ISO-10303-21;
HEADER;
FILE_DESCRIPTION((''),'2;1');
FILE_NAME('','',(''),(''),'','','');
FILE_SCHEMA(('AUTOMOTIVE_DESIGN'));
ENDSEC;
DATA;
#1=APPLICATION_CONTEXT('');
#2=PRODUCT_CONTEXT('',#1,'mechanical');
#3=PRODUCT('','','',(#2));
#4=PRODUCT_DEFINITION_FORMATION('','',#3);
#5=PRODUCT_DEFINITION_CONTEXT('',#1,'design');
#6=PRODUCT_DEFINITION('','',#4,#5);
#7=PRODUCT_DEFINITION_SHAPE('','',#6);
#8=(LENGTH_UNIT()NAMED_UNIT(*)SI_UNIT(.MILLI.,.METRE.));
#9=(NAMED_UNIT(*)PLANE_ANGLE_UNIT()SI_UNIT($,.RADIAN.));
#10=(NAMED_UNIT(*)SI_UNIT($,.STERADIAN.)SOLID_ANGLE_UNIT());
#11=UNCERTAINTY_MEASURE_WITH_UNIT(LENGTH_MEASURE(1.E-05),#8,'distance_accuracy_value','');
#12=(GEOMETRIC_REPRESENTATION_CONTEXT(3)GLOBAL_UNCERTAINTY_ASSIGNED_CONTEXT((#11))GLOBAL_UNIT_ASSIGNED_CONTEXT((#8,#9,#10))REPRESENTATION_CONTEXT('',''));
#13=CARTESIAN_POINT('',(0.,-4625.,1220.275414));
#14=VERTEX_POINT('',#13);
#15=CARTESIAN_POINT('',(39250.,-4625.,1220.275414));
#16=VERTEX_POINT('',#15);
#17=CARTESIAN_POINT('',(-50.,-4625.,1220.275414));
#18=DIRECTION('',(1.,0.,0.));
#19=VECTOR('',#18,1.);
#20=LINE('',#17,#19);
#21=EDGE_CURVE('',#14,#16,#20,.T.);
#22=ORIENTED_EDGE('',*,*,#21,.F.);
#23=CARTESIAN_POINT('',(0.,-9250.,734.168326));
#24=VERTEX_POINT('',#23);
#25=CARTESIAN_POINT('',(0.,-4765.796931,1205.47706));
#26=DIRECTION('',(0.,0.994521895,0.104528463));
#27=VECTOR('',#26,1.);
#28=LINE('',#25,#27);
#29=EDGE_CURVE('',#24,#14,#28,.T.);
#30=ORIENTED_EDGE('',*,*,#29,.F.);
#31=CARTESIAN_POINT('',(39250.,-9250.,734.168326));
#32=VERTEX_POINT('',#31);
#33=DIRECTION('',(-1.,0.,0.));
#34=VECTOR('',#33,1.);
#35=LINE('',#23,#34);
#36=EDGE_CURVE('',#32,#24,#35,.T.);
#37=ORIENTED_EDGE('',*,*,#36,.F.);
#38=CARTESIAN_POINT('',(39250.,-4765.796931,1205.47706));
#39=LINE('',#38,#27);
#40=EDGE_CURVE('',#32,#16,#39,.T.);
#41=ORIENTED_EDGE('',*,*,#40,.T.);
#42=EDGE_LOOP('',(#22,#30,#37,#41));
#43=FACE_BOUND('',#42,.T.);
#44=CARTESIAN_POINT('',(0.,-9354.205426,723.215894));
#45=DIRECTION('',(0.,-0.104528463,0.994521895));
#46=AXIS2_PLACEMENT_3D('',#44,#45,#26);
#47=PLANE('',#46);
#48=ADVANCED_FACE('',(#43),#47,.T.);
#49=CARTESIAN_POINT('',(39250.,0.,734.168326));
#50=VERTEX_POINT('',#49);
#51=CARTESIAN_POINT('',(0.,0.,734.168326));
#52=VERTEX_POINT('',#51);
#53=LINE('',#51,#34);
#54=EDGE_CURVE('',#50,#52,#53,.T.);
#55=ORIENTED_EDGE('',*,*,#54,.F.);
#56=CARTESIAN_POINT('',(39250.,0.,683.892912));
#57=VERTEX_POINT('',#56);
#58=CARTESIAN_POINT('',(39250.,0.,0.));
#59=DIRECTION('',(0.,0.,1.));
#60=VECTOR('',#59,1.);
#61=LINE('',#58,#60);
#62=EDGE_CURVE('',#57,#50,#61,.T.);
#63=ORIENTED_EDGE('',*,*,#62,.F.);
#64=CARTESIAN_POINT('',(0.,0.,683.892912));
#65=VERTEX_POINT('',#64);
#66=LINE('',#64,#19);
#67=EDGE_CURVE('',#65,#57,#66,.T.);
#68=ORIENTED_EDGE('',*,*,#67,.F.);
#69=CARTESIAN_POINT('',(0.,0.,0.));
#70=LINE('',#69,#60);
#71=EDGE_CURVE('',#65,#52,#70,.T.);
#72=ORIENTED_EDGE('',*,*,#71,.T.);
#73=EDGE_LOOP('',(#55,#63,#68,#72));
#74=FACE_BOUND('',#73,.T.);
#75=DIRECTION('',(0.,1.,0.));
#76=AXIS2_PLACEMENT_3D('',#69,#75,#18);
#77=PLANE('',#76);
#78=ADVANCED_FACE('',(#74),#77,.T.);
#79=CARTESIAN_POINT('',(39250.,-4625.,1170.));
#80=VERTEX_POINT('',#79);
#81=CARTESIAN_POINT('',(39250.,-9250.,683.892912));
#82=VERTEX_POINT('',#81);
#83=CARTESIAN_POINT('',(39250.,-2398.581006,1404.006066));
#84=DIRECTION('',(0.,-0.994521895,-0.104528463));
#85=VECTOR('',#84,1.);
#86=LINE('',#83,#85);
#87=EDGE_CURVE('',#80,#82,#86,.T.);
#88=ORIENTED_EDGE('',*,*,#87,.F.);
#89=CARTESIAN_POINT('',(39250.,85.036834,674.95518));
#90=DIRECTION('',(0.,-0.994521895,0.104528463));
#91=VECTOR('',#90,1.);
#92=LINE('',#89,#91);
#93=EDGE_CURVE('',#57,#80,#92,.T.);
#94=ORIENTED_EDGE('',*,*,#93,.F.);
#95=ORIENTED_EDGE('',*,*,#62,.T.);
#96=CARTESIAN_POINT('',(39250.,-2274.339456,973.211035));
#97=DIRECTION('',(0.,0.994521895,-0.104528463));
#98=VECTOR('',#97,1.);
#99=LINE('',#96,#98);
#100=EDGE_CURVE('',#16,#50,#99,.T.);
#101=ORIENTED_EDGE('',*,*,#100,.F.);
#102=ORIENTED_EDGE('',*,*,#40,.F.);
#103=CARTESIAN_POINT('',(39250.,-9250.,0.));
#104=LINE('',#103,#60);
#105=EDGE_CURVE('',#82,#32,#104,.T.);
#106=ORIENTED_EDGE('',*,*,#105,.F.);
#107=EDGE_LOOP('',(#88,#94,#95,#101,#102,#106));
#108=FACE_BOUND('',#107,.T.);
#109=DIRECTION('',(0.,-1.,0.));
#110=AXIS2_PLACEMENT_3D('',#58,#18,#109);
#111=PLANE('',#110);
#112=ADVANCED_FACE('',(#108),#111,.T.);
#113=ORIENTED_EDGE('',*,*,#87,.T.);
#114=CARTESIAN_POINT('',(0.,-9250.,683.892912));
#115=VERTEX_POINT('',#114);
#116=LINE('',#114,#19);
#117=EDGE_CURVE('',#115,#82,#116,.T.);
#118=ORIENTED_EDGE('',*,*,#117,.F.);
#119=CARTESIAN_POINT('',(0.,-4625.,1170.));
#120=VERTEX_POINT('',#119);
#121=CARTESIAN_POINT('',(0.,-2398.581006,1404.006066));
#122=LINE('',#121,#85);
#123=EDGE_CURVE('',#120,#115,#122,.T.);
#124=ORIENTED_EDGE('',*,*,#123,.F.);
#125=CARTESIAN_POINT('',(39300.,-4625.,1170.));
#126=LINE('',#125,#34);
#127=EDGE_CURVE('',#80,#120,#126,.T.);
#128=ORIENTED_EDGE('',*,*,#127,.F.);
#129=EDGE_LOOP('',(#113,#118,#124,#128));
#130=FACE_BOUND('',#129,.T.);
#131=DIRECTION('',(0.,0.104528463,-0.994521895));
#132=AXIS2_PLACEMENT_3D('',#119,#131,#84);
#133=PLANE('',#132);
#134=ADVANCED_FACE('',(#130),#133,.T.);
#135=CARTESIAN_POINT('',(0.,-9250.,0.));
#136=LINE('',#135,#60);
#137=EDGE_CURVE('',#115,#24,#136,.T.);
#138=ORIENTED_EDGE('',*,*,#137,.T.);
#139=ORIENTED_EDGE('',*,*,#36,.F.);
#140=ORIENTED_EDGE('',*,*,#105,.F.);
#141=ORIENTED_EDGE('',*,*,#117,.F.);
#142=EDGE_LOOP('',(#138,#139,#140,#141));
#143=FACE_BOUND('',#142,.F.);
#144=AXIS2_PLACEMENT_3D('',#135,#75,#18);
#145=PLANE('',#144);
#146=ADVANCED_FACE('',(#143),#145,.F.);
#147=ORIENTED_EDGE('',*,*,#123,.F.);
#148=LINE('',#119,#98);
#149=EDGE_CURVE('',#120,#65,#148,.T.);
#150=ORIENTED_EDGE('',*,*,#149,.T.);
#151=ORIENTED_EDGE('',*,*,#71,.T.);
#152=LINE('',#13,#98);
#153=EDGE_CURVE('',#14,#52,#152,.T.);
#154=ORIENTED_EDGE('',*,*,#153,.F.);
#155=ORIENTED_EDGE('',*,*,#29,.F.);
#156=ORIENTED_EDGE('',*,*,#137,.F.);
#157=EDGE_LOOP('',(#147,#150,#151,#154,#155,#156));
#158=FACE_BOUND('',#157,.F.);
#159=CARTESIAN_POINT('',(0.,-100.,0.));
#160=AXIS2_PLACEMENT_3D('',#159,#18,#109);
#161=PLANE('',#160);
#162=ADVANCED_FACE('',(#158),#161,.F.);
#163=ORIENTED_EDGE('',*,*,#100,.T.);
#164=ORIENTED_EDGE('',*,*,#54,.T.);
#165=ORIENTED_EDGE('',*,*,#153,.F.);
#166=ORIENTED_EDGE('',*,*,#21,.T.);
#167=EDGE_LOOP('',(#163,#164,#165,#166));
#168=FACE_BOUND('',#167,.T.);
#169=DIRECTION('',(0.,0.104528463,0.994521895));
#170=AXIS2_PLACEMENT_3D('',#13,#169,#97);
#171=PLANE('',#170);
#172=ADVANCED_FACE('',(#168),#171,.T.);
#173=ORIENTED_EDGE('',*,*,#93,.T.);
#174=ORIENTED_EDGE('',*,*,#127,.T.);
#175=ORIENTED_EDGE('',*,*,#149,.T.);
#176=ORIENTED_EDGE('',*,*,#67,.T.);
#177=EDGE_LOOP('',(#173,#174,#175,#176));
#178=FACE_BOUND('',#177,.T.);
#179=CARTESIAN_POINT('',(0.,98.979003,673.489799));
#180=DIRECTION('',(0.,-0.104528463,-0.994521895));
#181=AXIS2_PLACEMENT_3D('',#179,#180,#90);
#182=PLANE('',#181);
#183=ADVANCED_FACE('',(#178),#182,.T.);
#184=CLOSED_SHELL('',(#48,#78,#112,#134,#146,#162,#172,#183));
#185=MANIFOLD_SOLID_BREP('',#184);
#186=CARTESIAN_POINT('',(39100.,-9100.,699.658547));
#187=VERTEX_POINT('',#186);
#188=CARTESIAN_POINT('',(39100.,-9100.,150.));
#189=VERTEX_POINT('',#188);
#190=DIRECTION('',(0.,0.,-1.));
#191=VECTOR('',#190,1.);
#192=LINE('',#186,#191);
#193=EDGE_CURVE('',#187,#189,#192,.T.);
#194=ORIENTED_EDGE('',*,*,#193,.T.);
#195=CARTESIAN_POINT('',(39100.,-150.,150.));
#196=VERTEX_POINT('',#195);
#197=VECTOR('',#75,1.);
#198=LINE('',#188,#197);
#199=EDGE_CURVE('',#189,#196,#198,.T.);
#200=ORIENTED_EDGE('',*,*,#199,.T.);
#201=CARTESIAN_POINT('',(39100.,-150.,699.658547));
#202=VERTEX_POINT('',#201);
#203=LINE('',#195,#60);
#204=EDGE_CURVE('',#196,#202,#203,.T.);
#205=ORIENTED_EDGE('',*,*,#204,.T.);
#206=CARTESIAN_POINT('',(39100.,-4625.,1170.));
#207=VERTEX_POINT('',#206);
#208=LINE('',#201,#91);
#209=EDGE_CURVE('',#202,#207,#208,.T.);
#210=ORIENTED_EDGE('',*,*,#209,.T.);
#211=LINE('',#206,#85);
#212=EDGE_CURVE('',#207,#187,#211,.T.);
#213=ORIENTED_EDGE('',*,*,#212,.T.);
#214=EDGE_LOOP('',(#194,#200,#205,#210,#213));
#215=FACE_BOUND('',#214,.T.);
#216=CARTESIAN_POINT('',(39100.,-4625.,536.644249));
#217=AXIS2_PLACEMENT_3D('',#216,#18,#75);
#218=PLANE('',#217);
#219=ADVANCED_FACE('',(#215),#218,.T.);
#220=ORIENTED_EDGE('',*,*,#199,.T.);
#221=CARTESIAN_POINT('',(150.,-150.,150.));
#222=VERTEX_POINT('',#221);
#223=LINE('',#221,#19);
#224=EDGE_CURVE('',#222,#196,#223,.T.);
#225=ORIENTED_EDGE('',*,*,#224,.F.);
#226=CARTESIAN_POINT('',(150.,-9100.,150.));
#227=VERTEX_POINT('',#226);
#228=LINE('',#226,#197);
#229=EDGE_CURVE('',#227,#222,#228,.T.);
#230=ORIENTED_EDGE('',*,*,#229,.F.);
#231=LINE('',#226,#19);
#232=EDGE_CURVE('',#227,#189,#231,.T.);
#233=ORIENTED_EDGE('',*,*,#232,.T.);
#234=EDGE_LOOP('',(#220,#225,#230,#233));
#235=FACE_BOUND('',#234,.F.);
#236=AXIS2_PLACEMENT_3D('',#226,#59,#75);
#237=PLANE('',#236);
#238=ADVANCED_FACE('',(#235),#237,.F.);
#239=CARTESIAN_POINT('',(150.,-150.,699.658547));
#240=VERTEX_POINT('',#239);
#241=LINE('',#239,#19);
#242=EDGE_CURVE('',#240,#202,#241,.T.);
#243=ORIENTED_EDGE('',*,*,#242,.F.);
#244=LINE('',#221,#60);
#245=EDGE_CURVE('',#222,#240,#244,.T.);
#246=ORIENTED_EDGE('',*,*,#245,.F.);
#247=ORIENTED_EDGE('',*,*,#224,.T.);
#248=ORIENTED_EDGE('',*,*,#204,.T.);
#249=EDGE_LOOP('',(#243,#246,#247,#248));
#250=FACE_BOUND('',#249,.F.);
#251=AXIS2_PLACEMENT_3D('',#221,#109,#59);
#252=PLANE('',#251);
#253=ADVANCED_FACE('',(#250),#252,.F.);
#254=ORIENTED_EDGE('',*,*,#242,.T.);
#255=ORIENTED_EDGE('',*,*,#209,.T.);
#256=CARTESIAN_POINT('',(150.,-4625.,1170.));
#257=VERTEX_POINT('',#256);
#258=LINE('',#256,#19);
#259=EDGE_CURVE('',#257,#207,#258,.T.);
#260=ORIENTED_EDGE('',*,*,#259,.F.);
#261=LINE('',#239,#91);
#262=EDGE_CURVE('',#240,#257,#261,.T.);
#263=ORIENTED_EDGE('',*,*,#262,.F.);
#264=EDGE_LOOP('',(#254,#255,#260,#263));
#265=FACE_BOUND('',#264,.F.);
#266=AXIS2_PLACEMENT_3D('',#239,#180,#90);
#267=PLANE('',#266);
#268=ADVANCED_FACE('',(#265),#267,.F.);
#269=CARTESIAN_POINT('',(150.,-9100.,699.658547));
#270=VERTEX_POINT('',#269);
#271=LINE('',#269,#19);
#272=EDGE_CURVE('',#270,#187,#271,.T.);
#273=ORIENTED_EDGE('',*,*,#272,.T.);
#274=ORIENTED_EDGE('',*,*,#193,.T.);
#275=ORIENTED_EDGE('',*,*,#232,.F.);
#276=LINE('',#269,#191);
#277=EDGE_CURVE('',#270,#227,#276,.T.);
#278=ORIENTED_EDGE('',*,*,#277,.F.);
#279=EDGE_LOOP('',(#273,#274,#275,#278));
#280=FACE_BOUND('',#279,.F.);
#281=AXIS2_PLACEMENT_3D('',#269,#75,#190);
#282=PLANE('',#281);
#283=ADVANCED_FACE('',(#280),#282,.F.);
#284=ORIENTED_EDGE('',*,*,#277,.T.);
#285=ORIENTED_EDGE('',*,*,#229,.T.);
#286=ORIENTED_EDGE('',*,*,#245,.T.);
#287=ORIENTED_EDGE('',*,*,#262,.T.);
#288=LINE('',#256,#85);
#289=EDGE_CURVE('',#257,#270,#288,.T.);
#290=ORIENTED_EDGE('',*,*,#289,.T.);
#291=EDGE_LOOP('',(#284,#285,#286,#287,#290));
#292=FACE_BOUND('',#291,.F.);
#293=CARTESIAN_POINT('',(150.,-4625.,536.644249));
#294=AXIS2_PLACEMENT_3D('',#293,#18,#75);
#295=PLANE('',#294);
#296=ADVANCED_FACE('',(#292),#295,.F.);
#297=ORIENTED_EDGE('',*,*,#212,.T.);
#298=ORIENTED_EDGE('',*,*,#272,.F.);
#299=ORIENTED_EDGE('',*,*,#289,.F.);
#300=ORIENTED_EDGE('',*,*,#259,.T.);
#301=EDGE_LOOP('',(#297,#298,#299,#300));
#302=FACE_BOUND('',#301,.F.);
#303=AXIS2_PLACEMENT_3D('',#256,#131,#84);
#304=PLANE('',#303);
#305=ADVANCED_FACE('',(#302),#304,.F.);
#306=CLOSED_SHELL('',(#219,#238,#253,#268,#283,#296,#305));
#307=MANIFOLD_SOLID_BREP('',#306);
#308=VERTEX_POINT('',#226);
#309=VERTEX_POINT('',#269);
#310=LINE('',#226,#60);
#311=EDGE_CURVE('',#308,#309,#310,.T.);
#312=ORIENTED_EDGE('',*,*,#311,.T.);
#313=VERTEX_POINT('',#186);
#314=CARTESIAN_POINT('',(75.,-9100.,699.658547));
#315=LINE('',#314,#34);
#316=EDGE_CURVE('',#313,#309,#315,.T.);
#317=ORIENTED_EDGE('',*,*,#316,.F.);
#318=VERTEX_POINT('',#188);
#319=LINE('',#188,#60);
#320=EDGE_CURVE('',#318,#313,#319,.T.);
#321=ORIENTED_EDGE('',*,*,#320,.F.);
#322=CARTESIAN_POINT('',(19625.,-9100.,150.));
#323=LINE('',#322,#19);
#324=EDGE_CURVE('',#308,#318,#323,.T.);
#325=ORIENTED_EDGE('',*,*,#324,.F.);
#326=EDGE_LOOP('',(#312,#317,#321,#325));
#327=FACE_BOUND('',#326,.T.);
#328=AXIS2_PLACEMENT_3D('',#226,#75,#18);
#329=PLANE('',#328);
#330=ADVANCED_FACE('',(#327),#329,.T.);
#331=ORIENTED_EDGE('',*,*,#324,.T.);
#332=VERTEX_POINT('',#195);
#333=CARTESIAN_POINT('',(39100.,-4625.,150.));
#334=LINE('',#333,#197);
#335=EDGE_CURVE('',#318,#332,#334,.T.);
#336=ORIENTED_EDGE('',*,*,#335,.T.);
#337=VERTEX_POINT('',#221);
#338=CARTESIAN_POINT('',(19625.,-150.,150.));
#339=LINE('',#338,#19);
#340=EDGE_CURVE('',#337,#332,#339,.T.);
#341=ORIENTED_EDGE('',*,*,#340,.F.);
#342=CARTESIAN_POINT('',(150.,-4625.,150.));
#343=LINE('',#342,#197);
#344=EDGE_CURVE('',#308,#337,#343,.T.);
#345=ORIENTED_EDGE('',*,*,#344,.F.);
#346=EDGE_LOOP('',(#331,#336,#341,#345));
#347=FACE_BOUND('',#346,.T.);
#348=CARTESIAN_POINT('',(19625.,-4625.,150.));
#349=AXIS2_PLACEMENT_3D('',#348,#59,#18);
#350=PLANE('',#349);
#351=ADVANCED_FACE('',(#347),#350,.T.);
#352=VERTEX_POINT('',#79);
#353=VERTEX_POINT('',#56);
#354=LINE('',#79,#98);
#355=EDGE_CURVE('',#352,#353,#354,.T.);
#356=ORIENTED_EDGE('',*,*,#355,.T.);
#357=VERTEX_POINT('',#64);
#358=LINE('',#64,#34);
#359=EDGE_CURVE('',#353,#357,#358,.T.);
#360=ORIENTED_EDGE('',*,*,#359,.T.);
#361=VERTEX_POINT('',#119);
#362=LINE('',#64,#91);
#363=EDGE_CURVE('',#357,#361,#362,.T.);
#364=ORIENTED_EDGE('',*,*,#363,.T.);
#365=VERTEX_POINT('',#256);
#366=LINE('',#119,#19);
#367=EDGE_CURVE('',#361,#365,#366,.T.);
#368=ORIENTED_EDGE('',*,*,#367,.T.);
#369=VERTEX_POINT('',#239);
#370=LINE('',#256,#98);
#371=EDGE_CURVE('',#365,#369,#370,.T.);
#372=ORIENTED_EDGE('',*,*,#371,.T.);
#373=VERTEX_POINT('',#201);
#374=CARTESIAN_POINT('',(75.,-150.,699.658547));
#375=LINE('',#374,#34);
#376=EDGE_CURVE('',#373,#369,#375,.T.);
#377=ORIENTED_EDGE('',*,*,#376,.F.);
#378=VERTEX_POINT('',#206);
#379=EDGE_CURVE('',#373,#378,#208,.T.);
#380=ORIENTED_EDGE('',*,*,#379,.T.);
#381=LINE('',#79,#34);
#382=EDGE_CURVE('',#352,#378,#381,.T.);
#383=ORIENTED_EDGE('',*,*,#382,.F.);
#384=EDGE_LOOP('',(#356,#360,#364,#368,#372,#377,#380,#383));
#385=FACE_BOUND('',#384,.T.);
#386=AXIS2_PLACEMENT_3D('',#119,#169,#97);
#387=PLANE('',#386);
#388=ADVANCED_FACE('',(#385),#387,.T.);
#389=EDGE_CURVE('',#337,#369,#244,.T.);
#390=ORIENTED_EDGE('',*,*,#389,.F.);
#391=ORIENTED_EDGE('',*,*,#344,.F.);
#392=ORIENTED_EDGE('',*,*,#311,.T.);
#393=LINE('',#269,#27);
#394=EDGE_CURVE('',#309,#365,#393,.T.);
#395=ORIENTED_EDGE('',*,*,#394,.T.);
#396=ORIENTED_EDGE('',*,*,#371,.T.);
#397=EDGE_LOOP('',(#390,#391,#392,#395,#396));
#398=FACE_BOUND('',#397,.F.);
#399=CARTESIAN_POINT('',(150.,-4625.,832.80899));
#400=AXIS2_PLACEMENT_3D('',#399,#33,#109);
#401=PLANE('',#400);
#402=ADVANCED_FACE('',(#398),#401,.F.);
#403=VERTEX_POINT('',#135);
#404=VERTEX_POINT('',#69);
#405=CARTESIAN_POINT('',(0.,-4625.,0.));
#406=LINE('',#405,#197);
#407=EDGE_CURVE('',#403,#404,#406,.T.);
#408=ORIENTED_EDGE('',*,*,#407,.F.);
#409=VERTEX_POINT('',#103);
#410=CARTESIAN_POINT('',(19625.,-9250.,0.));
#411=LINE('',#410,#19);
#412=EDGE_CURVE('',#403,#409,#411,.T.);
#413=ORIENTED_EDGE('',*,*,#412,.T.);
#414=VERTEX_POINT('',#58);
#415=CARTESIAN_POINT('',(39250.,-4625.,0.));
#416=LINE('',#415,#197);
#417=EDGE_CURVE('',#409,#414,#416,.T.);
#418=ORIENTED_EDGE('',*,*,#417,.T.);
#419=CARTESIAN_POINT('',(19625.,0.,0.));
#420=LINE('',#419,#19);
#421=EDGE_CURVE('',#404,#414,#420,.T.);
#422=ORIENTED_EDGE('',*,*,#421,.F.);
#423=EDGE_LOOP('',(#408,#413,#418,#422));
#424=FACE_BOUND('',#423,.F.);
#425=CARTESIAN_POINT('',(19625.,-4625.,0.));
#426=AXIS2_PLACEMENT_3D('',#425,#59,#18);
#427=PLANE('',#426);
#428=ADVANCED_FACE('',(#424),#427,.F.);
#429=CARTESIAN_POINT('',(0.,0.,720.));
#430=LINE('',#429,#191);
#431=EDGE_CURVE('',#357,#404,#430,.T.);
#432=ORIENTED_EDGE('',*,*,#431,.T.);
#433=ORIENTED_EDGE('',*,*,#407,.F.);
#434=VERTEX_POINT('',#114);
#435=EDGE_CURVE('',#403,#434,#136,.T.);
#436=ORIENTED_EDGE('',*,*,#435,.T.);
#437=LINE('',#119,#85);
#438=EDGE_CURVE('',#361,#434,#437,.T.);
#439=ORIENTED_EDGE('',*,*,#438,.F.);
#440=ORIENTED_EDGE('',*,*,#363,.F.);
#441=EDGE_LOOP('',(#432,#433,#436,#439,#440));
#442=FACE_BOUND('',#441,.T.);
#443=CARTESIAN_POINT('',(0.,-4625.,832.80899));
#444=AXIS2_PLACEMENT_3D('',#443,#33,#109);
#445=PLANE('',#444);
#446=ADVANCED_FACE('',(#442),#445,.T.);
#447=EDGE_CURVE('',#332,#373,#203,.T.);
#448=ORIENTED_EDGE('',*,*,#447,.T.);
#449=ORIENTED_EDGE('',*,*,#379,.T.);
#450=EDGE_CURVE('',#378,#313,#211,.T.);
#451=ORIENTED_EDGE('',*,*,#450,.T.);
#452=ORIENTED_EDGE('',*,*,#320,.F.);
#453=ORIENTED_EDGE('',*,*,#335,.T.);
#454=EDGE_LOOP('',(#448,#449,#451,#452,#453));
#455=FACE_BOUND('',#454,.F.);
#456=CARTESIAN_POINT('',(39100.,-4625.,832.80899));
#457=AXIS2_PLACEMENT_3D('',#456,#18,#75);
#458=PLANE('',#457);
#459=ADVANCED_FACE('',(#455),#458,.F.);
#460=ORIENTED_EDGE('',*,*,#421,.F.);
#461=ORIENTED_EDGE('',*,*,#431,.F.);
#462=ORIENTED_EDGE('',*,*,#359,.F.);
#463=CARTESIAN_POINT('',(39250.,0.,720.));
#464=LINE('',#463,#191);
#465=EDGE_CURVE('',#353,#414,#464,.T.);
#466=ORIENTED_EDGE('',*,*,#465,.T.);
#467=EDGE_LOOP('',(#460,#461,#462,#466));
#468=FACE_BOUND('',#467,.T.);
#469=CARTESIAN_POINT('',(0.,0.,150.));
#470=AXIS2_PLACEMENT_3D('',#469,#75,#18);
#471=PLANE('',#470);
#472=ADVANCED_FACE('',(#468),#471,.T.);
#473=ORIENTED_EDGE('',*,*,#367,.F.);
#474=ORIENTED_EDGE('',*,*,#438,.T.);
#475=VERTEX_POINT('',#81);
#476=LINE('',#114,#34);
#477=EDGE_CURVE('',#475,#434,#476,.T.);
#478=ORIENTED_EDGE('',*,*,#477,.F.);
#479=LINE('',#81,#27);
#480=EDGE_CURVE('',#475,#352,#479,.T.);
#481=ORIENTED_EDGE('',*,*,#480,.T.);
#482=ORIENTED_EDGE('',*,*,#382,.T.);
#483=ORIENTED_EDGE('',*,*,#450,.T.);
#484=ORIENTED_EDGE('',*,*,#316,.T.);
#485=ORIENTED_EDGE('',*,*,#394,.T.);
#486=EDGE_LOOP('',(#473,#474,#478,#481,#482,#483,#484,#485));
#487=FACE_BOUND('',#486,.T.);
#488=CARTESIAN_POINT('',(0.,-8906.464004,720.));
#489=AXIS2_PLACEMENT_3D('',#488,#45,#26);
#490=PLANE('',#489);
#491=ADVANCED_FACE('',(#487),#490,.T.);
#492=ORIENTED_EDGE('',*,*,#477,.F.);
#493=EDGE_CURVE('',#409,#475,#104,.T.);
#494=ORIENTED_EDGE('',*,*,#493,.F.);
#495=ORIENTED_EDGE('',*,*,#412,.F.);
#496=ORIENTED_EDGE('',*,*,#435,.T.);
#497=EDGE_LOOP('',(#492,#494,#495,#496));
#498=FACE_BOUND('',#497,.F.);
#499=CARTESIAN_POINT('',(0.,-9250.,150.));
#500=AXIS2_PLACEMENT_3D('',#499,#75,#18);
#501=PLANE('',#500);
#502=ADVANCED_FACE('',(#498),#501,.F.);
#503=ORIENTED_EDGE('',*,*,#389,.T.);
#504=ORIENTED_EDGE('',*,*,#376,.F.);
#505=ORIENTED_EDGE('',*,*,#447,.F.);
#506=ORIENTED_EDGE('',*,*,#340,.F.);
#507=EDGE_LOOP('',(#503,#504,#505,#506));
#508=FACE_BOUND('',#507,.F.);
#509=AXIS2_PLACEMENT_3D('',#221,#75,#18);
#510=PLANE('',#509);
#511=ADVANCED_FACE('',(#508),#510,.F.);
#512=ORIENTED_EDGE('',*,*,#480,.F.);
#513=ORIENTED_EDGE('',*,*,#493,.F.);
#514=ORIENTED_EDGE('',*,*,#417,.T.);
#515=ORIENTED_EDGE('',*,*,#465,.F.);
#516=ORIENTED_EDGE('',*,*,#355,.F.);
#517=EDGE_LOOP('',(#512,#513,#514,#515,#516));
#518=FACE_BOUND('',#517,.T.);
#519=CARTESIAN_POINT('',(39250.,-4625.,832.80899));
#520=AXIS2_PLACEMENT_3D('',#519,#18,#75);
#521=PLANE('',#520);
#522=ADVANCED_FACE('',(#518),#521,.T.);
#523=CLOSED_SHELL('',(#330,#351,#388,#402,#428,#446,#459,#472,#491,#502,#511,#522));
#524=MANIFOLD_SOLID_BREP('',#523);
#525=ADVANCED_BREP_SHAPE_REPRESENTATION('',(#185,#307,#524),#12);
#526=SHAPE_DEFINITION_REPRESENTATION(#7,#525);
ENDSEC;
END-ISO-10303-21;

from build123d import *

# Parameters (mm, degrees)
F0_W          = 39250
F0_H          = 9250
F1_DEPTH      = 150
F2_W          = 39250
F2_H          = 9250
F2_W_2        = 38950
F2_H_2        = 8950
F3_DEPTH      = 570
F5_DEPTH      = 39250.001
F7_DEPTH      = 50
F7_DEPTH_BACK = 39300
F9_DEPTH      = 150
F11_DEPTH     = 150
F12_W         = 266.9223773158
F12_H         = 1000
F13_DEPTH     = 1220.2764139782
F14_W         = 44695.1484680176
F14_H         = 14306.3936233521
F14_W_2       = 39250
F14_H_2       = 9250
F15_DEPTH     = 1220.2764139782
F17_DEPTH     = 38950


with BuildPart() as f1:
    # F0 (on Top) → F1 (new body)
    with BuildSketch(Plane.XY):
        with Locations((19625, -4625)):
            Rectangle(F0_W, F0_H)
    extrude(amount=F1_DEPTH)

    # F2 (on face) → F3 (join)
    with BuildSketch(Plane.XY.offset(150)):
        with Locations((19625, -4625)):
            Rectangle(F2_W, F2_H)
        with Locations((19625, -4625)):
            Rectangle(F2_W_2, F2_H_2, mode=Mode.SUBTRACT)
    extrude(amount=F3_DEPTH)

    # F4 (on face) → F5 (cut, through all)
    with BuildSketch(Plane(origin=(0, 0, 0), x_dir=(0, -1, 0), z_dir=(-1, 0, 0))):
        Polygon((-659.6078069495, 614.5653377715), (4625, 1170), (1956.3378095627, 2374.1724491119), align=None)
        Polygon((7293.6621904373, 2374.1724491119), (4625, 1170), (9909.6078069495, 614.5653377715), align=None)
    extrude(amount=-F5_DEPTH, mode=Mode.SUBTRACT)

    # F8 (on face) → F9 (join)
    with BuildSketch(Plane.YZ.offset(39250)):
        Polygon((-8906.4640044002, 720), (-343.5359955999, 720), (-4625, 1170), align=None)
    extrude(amount=-F9_DEPTH)

    # F10 (on face) → F11 (join)
    with BuildSketch(Plane(origin=(0, 0, 0), x_dir=(0, -1, 0), z_dir=(-1, 0, 0))):
        Polygon((4625, 1170), (343.5359955998, 720), (8906.4640044001, 720), align=None)
    extrude(amount=-F11_DEPTH)


with BuildPart() as f7:
    # F6 (on face) → F7 (new body, two sides)
    with BuildSketch(Plane(origin=(0, 0, 0), x_dir=(0, -1, 0), z_dir=(-1, 0, 0))) as f7_sk:
        Polygon((-98.9790029993, 673.4897994786), (4625, 1170), (9348.9790029993, 673.4897994786), (9354.2054261627, 723.2158942471), (4625, 1220.2754139782), (-104.2054261627, 723.2158942471), align=None)
    extrude(amount=F7_DEPTH)
    extrude(f7_sk.sketch, amount=-F7_DEPTH_BACK)

    # F12 (on face) → F13 (cut, through all)
    with BuildSketch(Plane(origin=(0, 0, 0), x_dir=(1, 0, 0), z_dir=(0, 0, -1))):
        with Locations((-133.4611886579, 600)):
            Rectangle(F12_W, F12_H)
    extrude(amount=-F13_DEPTH, mode=Mode.SUBTRACT)

    # F14 (on face) → F15 (cut, through all)
    with BuildSketch(Plane(origin=(0, 0, 0), x_dir=(1, 0, 0), z_dir=(0, 0, -1))):
        with Locations((18414.8387908936, 3717.1730995178)):
            Rectangle(F14_W, F14_H)
        with Locations((19625, 4625)):
            Rectangle(F14_W_2, F14_H_2, mode=Mode.SUBTRACT)
    extrude(amount=-F15_DEPTH, mode=Mode.SUBTRACT)


with BuildPart() as f17:
    # F16 (on face) → F17 (new body, through all)
    with BuildSketch(Plane.YZ.offset(150)):
        Polygon((-9100, 150), (-150, 150), (-150, 699.6585471861), (-4625, 1170), (-9100, 699.6585471861), align=None)
    extrude(amount=F17_DEPTH)


solid = Compound([f1.part, f7.part, f17.part])
